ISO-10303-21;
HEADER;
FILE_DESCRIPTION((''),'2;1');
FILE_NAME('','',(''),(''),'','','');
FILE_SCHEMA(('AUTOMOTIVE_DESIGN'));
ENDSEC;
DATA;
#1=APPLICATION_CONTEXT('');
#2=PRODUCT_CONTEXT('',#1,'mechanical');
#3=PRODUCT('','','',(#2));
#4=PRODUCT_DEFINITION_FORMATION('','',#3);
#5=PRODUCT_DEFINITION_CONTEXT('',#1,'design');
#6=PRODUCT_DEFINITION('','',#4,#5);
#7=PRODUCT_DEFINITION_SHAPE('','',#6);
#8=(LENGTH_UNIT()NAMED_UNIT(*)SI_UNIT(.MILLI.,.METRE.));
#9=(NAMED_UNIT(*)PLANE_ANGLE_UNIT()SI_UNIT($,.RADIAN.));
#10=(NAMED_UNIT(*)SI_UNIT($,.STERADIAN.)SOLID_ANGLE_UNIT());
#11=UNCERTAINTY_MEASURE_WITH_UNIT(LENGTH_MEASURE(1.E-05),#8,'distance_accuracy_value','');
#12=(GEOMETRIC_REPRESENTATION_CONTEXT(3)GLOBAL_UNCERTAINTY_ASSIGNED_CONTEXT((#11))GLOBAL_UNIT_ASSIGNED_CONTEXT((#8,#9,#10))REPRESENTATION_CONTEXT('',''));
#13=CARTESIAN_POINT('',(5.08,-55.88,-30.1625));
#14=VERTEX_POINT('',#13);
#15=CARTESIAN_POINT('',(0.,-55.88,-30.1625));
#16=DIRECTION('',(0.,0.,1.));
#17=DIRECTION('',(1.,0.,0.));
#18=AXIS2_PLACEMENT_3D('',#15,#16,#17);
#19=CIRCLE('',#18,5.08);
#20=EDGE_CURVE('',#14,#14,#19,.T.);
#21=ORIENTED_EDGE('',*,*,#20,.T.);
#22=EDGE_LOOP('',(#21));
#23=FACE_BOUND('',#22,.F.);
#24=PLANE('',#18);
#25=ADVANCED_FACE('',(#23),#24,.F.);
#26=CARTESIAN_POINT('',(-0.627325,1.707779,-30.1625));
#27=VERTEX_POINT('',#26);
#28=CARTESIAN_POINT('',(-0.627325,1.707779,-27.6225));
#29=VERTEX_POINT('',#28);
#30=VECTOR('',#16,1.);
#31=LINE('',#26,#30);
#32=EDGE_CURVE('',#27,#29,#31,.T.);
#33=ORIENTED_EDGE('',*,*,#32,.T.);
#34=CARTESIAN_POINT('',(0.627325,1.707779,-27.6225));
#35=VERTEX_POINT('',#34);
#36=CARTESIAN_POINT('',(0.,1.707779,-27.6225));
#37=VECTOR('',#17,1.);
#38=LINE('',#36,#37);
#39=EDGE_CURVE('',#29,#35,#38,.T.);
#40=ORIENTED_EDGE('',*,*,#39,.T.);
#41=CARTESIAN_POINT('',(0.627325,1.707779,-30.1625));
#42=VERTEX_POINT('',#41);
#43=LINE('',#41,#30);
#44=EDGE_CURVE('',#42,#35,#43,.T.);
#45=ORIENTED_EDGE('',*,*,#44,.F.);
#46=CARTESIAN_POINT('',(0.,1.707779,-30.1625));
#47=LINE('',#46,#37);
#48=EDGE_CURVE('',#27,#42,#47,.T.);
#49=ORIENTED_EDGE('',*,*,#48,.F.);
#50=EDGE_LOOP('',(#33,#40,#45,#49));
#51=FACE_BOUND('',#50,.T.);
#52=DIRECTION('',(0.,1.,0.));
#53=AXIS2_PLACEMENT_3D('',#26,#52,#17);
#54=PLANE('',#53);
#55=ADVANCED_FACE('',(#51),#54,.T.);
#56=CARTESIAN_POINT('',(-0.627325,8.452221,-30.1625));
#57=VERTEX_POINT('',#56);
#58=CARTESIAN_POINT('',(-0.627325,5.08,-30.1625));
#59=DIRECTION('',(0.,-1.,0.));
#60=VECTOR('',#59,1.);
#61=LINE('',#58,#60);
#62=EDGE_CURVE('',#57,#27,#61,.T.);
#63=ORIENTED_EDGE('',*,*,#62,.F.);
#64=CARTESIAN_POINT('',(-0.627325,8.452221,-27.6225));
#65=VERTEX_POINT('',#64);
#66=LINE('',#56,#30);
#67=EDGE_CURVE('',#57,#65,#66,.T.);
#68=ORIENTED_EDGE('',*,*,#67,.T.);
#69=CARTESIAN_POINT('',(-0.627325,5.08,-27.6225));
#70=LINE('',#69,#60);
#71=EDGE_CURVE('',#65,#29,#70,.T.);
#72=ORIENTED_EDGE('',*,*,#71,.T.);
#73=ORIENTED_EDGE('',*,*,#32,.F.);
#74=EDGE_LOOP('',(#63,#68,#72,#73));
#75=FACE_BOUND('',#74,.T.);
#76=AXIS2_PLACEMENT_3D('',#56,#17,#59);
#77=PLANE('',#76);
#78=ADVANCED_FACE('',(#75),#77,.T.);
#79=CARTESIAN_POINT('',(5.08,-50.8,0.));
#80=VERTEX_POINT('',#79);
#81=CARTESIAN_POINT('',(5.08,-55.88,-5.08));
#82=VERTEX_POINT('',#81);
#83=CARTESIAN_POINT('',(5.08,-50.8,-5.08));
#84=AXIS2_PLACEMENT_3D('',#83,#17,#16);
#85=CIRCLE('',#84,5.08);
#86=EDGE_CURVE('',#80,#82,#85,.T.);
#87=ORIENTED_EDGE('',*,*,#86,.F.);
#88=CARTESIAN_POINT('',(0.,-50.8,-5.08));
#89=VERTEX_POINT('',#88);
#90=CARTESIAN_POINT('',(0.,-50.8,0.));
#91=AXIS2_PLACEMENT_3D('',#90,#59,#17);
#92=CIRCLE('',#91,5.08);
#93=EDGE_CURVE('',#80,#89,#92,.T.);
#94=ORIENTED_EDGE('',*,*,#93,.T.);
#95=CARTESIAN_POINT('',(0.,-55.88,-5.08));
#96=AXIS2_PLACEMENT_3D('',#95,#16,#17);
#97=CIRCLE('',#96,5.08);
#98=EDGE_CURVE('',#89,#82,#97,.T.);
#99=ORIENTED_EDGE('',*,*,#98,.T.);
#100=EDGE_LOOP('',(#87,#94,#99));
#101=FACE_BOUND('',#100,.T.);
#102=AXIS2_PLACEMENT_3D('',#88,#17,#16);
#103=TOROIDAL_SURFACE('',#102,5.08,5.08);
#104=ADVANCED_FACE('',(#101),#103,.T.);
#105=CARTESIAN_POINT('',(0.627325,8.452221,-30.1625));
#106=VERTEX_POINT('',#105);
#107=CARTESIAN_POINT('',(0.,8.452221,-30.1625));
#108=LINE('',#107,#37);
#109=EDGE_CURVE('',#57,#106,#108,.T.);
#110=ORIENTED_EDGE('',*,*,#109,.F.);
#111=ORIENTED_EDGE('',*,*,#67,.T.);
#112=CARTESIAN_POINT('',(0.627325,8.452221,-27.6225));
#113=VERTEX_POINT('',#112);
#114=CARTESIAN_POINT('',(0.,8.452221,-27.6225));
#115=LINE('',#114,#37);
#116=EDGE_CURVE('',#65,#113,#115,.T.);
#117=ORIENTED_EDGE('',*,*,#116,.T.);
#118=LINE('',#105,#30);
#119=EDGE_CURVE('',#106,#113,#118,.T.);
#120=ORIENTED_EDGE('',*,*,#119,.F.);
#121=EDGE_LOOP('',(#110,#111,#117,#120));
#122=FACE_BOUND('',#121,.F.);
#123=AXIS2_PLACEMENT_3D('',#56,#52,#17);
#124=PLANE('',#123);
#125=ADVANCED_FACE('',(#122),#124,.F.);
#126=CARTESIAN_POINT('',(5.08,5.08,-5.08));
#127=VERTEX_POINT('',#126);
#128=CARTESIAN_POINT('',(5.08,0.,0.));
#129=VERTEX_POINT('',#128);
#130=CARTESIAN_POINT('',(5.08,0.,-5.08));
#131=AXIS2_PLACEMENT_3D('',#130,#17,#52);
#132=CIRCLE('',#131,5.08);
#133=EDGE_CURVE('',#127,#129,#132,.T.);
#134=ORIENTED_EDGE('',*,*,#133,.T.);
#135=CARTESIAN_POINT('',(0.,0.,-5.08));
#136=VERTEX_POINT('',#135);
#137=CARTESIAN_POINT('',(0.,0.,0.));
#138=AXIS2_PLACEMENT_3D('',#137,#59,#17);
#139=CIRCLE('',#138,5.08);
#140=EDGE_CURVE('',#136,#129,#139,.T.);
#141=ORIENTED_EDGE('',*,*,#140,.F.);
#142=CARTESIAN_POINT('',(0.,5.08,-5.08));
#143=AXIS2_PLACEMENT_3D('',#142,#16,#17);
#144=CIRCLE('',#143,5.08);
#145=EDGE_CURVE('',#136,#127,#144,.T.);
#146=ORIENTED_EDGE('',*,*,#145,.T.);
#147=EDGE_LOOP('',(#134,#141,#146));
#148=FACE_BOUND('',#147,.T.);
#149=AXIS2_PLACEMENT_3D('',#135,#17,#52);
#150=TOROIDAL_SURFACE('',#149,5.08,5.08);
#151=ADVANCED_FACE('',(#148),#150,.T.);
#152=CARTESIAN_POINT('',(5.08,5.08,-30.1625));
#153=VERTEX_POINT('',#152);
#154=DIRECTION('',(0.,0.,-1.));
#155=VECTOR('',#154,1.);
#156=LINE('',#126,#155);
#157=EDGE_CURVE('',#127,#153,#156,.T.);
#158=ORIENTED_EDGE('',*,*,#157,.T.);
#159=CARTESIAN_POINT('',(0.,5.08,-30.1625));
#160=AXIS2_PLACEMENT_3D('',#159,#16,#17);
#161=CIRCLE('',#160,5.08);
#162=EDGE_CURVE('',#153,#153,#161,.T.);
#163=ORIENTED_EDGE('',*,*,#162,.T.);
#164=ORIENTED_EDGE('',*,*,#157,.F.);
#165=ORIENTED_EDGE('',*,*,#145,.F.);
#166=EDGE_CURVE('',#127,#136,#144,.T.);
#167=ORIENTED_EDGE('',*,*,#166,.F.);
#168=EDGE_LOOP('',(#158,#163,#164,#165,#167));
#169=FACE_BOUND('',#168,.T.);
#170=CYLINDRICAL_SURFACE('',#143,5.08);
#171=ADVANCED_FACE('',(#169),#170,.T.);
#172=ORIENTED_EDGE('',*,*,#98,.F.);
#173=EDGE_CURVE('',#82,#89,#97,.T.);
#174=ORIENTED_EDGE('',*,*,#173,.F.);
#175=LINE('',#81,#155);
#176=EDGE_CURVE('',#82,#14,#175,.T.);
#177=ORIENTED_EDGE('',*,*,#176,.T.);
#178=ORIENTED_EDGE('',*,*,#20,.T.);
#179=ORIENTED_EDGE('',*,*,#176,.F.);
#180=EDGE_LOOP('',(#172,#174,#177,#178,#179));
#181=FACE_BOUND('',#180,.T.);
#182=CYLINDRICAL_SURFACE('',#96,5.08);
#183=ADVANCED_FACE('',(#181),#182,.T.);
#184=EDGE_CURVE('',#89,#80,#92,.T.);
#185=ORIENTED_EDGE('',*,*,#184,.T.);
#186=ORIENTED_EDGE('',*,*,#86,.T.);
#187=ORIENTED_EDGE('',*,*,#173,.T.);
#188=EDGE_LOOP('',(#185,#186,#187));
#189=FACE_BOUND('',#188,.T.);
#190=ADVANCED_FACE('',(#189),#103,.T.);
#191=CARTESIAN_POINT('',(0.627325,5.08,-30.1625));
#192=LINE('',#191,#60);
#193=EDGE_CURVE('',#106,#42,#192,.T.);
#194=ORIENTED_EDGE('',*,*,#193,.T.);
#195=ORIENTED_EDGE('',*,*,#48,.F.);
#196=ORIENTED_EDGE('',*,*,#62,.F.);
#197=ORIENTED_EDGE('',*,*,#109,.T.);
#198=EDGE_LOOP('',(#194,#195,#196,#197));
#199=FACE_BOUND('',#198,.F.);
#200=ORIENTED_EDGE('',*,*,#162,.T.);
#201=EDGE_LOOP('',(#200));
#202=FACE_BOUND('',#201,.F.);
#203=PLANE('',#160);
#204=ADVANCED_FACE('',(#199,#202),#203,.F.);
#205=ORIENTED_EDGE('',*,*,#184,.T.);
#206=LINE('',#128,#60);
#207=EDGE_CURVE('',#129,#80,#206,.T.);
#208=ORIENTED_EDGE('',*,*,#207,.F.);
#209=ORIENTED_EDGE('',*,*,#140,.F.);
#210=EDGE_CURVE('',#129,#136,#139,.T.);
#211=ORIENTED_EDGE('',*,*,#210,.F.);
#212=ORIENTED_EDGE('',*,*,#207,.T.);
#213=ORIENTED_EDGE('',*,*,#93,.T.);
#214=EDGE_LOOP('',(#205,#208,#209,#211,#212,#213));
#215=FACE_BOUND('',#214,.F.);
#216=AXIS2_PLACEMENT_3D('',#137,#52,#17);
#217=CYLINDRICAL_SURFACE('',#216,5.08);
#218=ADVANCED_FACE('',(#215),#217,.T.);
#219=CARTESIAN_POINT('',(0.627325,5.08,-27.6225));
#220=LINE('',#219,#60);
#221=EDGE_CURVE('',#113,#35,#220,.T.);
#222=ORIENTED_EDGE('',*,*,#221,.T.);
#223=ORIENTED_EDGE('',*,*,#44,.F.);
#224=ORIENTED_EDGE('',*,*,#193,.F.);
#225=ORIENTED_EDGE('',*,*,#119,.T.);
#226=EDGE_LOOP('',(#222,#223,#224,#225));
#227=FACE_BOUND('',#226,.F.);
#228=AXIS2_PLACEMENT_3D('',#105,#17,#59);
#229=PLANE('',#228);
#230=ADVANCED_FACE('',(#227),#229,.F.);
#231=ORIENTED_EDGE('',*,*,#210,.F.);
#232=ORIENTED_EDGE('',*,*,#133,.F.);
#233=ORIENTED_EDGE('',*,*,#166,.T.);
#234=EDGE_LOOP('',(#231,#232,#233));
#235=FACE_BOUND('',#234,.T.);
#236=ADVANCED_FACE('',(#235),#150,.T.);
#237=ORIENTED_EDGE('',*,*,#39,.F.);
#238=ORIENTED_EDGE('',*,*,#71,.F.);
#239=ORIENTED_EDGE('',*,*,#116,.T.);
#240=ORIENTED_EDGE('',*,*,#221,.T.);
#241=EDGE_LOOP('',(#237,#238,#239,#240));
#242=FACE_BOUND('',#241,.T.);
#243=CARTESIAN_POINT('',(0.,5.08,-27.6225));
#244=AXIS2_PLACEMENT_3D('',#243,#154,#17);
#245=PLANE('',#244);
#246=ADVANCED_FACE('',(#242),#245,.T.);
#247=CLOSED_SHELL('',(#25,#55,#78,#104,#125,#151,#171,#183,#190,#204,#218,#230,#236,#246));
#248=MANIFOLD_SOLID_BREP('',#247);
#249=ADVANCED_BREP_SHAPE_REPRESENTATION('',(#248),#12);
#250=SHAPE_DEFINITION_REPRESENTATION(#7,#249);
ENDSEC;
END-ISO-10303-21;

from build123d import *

# Parameters (mm, degrees)
F0_R     = 5.08
F1_DEPTH = 50.8
F3_R     = 5.08
F4_DEPTH = 25.0825
F8_W     = 1.2546490179
F8_H     = 6.7444416398
F9_DEPTH = 2.54


with BuildPart() as f1:
    # F0 (on Front) → F1 (new body)
    with BuildSketch(Plane.XZ):
        Circle(F0_R)
    extrude(amount=F1_DEPTH)

    # F3 (on offset) → F4 (join)
    with BuildSketch(Plane.XY.offset(-5.08)):
        with Locations((0, -55.88)):
            Circle(F3_R)
        with Locations((0, 5.08)):
            Circle(F3_R)
    extrude(amount=-F4_DEPTH)

    # F6: sweep along a path in F5
    with BuildLine(Plane.YZ) as f6_path:
        ThreePointArc((5.08, -5.08), (3.5921024484, -1.4878975516), (0, 0))
    # F1_face (on face) → F6 (sweep)
    with BuildSketch(Plane(origin=(0, 0, 0), x_dir=(1, 0, 0), z_dir=(0, 1, 0))):
        with BuildLine():
            ThreePointArc((5.4e-09, 5.08), (-3.5921024504, -3.5921024465), (5.08, 0))
            ThreePointArc((5.08, 0), (3.5921024504, 3.5921024465), (5.4e-09, 5.08))
        make_face()
    sweep(path=f6_path.line)

    # F7: sweep along a path in F5
    with BuildLine(Plane.YZ) as f7_path:
        ThreePointArc((-50.8, 0), (-54.3921024484, -1.4878975516), (-55.88, -5.08))
    # F1_face1 (on face) → F7 (sweep)
    with BuildSketch(Plane.XZ.offset(50.8)):
        with BuildLine():
            ThreePointArc((5.08, 0), (-3.5921024472, 3.5921024497), (-3.5e-09, -5.08))
            ThreePointArc((-3.5e-09, -5.08), (3.5921024472, -3.5921024497), (5.08, 0))
        make_face()
    sweep(path=f7_path.line)

    # F8 (on face) → F9 (cut)
    with BuildSketch(Plane(origin=(0, 0, -30.1625), x_dir=(1, 0, 0), z_dir=(0, 0, -1))):
        with Locations((0, -5.08)):
            Rectangle(F8_W, F8_H)
    extrude(amount=-F9_DEPTH, mode=Mode.SUBTRACT)


solid = f1.part
